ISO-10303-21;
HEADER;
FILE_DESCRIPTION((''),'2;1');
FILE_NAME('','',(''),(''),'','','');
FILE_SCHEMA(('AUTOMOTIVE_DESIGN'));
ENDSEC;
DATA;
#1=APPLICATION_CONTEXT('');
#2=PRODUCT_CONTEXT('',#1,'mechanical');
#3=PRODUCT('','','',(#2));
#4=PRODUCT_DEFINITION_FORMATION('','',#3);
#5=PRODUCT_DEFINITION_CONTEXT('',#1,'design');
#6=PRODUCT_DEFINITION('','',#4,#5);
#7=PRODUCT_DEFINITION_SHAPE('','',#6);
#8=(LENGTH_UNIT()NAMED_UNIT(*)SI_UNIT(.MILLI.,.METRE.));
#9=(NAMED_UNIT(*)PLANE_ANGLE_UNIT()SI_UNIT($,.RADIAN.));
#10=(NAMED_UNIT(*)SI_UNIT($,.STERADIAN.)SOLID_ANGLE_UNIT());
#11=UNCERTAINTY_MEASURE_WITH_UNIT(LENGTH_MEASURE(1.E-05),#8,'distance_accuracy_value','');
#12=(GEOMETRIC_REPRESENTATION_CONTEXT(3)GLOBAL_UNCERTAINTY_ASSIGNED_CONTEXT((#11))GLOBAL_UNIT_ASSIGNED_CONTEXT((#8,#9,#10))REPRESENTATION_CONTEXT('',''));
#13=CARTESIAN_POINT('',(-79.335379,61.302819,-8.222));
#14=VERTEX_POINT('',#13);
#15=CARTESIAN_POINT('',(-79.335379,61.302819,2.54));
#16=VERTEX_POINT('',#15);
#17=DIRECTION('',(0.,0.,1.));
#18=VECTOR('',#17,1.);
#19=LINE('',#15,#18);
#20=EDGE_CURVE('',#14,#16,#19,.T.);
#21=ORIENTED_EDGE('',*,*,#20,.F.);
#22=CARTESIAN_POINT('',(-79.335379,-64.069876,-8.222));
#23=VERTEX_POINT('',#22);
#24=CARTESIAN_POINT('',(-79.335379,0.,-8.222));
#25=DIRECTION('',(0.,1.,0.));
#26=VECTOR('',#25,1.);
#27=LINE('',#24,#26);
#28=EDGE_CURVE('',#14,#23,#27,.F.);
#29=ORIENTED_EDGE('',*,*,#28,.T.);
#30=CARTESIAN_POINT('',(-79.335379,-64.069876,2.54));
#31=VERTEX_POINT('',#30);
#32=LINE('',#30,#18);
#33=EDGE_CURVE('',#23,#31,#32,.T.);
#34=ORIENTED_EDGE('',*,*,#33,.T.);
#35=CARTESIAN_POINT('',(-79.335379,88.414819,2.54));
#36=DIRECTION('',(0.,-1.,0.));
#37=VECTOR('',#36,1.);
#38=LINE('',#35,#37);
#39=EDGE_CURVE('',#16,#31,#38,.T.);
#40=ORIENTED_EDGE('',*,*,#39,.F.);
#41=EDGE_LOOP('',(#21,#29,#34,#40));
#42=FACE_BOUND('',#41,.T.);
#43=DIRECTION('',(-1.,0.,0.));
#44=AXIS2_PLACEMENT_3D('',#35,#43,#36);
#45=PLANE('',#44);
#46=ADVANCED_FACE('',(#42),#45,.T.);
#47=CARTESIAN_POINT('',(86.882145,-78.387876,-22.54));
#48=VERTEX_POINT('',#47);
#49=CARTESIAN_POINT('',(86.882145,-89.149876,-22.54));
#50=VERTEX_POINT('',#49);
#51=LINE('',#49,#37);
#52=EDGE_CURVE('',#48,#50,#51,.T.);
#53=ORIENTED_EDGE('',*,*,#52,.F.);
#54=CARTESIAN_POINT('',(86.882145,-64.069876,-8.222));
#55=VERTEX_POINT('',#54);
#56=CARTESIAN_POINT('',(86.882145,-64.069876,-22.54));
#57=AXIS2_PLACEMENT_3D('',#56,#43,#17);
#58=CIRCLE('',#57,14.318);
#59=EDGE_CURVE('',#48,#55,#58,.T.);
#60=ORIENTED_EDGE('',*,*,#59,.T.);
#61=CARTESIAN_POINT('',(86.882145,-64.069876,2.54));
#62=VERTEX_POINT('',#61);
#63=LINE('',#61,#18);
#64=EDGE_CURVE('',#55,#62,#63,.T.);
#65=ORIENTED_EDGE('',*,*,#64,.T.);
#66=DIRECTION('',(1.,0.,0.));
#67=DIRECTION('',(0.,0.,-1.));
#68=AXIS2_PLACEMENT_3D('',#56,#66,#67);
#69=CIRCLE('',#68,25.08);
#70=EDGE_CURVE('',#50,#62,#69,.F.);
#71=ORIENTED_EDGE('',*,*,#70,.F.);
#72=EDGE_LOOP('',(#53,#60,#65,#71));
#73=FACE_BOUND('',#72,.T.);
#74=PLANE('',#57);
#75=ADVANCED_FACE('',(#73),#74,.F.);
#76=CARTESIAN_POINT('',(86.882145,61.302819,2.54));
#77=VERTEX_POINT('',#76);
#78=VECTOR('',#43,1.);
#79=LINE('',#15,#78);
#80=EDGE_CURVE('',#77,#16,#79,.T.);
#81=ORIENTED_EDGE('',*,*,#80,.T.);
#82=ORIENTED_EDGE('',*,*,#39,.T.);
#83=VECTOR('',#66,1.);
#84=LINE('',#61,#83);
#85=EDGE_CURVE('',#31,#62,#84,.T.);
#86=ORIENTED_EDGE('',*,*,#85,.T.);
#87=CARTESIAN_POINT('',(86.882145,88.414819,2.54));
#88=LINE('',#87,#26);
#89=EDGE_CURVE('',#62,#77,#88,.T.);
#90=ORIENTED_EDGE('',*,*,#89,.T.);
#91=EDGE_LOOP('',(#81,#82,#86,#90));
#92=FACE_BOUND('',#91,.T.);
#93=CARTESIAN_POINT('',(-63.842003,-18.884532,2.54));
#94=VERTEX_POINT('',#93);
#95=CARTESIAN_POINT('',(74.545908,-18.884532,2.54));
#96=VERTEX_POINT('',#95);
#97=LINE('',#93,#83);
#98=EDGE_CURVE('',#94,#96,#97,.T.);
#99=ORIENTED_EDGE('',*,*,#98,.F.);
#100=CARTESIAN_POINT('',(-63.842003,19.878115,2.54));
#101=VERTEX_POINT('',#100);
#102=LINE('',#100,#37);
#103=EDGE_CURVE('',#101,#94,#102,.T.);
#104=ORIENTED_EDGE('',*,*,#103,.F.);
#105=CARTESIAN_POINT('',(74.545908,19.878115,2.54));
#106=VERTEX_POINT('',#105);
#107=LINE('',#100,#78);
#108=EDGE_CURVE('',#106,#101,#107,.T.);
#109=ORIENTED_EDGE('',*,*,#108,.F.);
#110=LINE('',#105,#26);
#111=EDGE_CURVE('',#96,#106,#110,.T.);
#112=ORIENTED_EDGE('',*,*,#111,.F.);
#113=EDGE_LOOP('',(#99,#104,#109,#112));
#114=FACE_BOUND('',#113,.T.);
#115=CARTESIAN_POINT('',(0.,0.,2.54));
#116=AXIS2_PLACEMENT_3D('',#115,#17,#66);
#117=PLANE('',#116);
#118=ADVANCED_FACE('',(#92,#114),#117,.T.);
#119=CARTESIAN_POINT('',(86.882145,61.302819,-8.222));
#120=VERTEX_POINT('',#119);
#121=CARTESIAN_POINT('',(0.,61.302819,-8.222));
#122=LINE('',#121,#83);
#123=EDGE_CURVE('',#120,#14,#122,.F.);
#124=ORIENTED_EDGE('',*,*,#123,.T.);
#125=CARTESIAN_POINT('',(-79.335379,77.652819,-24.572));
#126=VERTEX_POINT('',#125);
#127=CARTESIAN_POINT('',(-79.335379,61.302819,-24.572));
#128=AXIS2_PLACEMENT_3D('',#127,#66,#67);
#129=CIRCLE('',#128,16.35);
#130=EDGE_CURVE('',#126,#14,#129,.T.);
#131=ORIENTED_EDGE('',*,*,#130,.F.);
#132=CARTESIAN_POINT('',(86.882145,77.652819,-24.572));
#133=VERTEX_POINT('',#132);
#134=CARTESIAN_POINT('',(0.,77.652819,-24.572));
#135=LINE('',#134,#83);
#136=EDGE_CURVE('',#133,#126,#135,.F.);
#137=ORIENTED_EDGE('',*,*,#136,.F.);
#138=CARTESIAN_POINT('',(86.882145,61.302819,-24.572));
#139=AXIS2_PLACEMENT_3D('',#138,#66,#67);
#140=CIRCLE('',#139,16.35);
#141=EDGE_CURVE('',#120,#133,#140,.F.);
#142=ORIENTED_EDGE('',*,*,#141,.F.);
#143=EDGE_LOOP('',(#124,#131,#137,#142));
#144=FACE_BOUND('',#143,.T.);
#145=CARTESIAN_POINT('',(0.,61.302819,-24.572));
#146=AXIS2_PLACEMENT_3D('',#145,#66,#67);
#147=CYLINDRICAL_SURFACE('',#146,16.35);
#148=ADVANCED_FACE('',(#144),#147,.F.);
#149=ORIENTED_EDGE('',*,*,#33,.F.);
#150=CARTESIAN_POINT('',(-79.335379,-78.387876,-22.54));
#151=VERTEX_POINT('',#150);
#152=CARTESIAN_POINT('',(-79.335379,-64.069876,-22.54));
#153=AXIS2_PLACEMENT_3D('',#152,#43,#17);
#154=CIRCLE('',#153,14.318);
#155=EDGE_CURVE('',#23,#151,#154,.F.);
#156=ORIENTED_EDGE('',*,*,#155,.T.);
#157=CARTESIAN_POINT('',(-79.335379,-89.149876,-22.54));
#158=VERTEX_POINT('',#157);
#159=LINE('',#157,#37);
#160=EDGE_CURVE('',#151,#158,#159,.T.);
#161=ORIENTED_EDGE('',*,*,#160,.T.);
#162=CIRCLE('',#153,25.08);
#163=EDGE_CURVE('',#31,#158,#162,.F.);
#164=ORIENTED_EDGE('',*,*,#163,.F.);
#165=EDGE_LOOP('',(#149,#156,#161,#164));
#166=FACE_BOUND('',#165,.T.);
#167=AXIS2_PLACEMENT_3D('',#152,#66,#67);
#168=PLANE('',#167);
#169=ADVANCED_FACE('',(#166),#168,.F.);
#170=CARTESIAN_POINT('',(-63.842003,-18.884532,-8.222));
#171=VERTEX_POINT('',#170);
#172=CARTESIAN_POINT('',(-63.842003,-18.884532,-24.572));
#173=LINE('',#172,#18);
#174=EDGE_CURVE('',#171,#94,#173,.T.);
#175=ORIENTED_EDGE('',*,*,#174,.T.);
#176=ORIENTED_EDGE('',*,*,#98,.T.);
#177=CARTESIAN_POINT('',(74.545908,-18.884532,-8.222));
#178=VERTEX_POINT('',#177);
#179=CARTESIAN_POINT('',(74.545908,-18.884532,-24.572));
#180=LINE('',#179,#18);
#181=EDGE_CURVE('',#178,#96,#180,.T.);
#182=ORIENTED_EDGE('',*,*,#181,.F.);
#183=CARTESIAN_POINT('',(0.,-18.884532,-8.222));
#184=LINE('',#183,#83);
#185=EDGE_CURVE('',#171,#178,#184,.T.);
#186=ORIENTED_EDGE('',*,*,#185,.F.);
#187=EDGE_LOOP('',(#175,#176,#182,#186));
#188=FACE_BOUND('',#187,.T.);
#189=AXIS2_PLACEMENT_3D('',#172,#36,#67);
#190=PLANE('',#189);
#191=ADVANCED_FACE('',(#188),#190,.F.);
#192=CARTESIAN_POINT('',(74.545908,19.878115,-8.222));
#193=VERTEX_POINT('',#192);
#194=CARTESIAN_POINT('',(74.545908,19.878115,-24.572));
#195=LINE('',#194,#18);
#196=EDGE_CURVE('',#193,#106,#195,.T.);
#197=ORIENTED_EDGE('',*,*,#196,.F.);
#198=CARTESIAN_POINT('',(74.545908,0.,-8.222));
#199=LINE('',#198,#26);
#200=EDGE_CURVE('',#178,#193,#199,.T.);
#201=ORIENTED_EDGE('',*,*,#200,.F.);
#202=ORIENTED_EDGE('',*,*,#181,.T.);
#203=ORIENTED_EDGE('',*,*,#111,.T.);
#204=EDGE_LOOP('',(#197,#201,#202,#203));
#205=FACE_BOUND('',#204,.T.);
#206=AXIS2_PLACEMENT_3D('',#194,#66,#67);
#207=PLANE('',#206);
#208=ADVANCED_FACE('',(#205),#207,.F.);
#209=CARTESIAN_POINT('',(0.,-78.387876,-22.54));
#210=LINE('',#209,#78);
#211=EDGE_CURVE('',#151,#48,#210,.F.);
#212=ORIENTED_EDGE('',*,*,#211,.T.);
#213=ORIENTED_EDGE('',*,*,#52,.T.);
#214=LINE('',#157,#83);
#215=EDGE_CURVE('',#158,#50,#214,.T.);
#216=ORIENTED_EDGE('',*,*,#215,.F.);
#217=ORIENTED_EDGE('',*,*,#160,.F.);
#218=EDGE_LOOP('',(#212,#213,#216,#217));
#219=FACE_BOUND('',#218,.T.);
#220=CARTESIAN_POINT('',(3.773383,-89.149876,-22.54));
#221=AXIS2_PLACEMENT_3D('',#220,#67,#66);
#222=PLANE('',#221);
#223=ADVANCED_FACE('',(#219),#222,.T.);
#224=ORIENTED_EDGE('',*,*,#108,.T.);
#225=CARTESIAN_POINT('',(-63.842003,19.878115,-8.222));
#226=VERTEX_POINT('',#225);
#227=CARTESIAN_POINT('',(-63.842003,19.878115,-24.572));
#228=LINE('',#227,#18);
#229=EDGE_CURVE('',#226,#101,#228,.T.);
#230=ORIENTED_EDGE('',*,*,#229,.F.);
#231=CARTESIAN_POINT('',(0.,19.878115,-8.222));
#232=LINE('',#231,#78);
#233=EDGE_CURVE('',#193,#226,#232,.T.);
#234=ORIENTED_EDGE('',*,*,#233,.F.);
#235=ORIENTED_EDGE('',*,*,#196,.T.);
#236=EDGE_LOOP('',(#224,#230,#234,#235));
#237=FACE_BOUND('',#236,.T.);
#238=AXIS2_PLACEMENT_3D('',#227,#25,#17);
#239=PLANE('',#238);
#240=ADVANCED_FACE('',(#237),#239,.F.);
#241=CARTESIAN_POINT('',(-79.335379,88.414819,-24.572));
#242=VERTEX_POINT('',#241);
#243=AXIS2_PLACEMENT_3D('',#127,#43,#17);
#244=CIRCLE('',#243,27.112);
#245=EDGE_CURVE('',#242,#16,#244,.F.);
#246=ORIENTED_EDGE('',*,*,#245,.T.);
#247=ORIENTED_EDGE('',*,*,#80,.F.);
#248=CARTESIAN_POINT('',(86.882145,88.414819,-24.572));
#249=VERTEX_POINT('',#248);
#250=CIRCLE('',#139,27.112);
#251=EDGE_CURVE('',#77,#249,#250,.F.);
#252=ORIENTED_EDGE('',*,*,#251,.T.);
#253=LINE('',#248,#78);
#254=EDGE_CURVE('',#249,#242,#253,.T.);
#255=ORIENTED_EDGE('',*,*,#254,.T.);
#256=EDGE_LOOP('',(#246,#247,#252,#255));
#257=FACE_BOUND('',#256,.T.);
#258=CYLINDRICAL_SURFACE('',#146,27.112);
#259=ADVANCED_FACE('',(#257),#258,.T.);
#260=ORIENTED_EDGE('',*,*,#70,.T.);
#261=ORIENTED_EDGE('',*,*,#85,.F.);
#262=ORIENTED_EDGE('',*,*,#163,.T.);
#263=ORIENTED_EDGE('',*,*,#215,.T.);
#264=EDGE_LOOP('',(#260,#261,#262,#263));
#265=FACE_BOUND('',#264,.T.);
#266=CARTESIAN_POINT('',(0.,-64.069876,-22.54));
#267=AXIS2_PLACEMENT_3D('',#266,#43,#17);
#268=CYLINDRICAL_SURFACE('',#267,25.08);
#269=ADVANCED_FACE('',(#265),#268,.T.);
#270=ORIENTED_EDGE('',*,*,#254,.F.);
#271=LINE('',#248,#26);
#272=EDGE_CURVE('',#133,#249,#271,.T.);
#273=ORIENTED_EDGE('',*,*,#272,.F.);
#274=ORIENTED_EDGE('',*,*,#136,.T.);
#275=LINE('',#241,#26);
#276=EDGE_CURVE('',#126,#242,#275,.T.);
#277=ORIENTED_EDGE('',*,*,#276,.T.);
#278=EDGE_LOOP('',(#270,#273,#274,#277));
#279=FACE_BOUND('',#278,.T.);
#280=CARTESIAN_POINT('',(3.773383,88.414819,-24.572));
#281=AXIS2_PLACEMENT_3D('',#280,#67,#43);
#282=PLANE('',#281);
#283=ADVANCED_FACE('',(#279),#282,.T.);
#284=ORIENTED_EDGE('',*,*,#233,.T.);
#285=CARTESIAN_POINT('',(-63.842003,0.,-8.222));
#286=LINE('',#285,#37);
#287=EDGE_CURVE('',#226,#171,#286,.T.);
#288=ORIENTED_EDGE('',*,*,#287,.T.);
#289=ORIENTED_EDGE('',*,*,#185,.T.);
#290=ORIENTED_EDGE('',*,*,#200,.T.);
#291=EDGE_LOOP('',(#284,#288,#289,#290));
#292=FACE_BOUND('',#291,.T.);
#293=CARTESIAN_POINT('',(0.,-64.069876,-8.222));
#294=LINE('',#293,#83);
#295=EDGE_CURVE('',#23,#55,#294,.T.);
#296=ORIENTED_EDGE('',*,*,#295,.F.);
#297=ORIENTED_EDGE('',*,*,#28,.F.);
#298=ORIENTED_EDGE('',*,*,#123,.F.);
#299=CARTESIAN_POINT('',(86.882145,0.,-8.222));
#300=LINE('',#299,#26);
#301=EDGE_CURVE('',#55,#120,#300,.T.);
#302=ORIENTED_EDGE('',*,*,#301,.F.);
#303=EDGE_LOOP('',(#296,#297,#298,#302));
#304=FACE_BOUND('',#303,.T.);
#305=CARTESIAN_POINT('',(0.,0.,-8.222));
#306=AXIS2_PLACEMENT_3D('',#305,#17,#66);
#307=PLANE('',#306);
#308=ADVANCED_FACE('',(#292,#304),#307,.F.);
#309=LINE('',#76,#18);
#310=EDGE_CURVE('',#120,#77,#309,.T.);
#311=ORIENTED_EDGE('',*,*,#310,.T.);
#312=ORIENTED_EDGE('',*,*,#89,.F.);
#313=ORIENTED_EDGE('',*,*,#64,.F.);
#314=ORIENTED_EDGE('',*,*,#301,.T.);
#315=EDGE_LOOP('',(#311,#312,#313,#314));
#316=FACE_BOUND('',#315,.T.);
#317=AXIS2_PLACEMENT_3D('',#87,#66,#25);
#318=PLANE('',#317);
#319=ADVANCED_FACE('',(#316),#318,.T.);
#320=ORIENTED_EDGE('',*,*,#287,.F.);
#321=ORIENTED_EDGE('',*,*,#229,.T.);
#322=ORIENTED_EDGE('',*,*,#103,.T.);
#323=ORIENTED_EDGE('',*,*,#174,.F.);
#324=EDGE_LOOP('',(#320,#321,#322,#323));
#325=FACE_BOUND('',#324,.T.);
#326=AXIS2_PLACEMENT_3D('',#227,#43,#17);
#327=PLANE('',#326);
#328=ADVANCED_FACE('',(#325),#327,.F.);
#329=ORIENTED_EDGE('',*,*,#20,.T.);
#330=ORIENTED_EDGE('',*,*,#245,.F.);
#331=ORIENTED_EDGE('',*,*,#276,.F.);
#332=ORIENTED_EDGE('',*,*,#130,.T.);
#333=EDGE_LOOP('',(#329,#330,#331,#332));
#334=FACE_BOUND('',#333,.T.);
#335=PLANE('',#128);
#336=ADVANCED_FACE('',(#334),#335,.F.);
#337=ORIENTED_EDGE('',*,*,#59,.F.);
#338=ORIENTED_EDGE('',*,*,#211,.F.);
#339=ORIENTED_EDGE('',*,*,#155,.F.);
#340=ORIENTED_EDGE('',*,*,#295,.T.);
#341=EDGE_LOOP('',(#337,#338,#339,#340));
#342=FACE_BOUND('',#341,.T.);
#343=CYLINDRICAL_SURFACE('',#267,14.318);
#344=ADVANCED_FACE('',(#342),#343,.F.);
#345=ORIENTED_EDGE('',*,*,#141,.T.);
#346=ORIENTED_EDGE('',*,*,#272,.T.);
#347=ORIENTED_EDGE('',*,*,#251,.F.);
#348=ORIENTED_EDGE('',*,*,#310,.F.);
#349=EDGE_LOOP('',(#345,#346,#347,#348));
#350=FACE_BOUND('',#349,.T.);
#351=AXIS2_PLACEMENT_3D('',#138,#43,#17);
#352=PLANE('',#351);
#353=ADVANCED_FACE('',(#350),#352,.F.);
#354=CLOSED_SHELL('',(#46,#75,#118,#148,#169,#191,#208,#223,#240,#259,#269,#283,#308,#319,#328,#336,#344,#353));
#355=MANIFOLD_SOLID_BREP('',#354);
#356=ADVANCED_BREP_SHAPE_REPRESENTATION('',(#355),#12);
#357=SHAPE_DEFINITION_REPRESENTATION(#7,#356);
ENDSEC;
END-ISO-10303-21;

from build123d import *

# Parameters (mm, degrees)
SKETCH1_W              = 166.217523153
SKETCH1_H              = 177.56469515
BOSS_EXTRUDE1_DEPTH    = 2.54
CONVERT_SOLID1_START   = -79.335378531
CONVERT_SOLID1_DEPTH   = 166.217523153
CONVERT_SOLID1_2_DEPTH = 166.217523153
SKETCH9_W              = 138.38791167
SKETCH9_H              = 38.762646995
CUT_EXTRUDE1_DEPTH     = 128.40199345


# Read off the part's stored shape, not the designer's step: Convert-Solid1
with BuildPart() as part:
    # Sketch1 → Boss-Extrude1 (new body)
    with BuildSketch(Plane.XY):
        with Locations((3.773383045, -0.367528123)):
            Rectangle(SKETCH1_W, SKETCH1_H)
    extrude(amount=BOSS_EXTRUDE1_DEPTH)

    # Convert-Solid1 outline → Convert-Solid1 (cut)
    with BuildSketch(Plane.YZ.offset(CONVERT_SOLID1_START)):
        with BuildLine():
            Line((-89.149875698, 0), (-75.067820962, 0))
            ThreePointArc((-75.067820962, 0), (-69.713597874, 1.896751012), (-64.069875698, 2.54))
            Line((-64.069875698, 2.54), (-89.149875698, 2.54))
            Line((-89.149875698, 2.54), (-89.149875698, 0))
        make_face()
        with BuildLine():
            ThreePointArc((61.302819452, 2.54), (67.170718566, 1.897384277), (72.760452717, 0))
            Line((72.760452717, 0), (88.414819452, 0))
            Line((88.414819452, 0), (88.414819452, 2.54))
            Line((88.414819452, 2.54), (61.302819452, 2.54))
        make_face()
    extrude(amount=CONVERT_SOLID1_DEPTH, mode=Mode.SUBTRACT)

    # Convert-Solid1 2 outline → Convert-Solid1 2 (add)
    with BuildSketch(Plane.YZ.offset(CONVERT_SOLID1_START)):
        with BuildLine():
            ThreePointArc((-75.067820962, 0), (-85.339982271, -9.251321871), (-89.149875698, -22.54))
            Line((-89.149875698, -22.54), (-78.387875698, -22.54))
            ThreePointArc((-78.387875698, -22.54), (-74.194230592, -12.415645107), (-64.069875698, -8.222))
            Line((-64.069875698, -8.222), (61.302819452, -8.222))
            ThreePointArc((61.302819452, -8.222), (72.864015325, -13.010804128), (77.652819452, -24.572))
            Line((77.652819452, -24.572), (88.414819452, -24.572))
            ThreePointArc((88.414819452, -24.572), (84.168731823, -10.004550138), (72.760452717, 0))
            Line((72.760452717, 0), (-75.067820962, 0))
        make_face()
    extrude(amount=CONVERT_SOLID1_2_DEPTH)

    # Sketch9 → Cut-Extrude1 (cut, through all)
    with BuildSketch(Plane.XY.offset(2.54)):
        with Locations((5.35195238, 0.49679134)):
            Rectangle(SKETCH9_W, SKETCH9_H)
    extrude(amount=-CUT_EXTRUDE1_DEPTH, mode=Mode.SUBTRACT)


solid = part.part
